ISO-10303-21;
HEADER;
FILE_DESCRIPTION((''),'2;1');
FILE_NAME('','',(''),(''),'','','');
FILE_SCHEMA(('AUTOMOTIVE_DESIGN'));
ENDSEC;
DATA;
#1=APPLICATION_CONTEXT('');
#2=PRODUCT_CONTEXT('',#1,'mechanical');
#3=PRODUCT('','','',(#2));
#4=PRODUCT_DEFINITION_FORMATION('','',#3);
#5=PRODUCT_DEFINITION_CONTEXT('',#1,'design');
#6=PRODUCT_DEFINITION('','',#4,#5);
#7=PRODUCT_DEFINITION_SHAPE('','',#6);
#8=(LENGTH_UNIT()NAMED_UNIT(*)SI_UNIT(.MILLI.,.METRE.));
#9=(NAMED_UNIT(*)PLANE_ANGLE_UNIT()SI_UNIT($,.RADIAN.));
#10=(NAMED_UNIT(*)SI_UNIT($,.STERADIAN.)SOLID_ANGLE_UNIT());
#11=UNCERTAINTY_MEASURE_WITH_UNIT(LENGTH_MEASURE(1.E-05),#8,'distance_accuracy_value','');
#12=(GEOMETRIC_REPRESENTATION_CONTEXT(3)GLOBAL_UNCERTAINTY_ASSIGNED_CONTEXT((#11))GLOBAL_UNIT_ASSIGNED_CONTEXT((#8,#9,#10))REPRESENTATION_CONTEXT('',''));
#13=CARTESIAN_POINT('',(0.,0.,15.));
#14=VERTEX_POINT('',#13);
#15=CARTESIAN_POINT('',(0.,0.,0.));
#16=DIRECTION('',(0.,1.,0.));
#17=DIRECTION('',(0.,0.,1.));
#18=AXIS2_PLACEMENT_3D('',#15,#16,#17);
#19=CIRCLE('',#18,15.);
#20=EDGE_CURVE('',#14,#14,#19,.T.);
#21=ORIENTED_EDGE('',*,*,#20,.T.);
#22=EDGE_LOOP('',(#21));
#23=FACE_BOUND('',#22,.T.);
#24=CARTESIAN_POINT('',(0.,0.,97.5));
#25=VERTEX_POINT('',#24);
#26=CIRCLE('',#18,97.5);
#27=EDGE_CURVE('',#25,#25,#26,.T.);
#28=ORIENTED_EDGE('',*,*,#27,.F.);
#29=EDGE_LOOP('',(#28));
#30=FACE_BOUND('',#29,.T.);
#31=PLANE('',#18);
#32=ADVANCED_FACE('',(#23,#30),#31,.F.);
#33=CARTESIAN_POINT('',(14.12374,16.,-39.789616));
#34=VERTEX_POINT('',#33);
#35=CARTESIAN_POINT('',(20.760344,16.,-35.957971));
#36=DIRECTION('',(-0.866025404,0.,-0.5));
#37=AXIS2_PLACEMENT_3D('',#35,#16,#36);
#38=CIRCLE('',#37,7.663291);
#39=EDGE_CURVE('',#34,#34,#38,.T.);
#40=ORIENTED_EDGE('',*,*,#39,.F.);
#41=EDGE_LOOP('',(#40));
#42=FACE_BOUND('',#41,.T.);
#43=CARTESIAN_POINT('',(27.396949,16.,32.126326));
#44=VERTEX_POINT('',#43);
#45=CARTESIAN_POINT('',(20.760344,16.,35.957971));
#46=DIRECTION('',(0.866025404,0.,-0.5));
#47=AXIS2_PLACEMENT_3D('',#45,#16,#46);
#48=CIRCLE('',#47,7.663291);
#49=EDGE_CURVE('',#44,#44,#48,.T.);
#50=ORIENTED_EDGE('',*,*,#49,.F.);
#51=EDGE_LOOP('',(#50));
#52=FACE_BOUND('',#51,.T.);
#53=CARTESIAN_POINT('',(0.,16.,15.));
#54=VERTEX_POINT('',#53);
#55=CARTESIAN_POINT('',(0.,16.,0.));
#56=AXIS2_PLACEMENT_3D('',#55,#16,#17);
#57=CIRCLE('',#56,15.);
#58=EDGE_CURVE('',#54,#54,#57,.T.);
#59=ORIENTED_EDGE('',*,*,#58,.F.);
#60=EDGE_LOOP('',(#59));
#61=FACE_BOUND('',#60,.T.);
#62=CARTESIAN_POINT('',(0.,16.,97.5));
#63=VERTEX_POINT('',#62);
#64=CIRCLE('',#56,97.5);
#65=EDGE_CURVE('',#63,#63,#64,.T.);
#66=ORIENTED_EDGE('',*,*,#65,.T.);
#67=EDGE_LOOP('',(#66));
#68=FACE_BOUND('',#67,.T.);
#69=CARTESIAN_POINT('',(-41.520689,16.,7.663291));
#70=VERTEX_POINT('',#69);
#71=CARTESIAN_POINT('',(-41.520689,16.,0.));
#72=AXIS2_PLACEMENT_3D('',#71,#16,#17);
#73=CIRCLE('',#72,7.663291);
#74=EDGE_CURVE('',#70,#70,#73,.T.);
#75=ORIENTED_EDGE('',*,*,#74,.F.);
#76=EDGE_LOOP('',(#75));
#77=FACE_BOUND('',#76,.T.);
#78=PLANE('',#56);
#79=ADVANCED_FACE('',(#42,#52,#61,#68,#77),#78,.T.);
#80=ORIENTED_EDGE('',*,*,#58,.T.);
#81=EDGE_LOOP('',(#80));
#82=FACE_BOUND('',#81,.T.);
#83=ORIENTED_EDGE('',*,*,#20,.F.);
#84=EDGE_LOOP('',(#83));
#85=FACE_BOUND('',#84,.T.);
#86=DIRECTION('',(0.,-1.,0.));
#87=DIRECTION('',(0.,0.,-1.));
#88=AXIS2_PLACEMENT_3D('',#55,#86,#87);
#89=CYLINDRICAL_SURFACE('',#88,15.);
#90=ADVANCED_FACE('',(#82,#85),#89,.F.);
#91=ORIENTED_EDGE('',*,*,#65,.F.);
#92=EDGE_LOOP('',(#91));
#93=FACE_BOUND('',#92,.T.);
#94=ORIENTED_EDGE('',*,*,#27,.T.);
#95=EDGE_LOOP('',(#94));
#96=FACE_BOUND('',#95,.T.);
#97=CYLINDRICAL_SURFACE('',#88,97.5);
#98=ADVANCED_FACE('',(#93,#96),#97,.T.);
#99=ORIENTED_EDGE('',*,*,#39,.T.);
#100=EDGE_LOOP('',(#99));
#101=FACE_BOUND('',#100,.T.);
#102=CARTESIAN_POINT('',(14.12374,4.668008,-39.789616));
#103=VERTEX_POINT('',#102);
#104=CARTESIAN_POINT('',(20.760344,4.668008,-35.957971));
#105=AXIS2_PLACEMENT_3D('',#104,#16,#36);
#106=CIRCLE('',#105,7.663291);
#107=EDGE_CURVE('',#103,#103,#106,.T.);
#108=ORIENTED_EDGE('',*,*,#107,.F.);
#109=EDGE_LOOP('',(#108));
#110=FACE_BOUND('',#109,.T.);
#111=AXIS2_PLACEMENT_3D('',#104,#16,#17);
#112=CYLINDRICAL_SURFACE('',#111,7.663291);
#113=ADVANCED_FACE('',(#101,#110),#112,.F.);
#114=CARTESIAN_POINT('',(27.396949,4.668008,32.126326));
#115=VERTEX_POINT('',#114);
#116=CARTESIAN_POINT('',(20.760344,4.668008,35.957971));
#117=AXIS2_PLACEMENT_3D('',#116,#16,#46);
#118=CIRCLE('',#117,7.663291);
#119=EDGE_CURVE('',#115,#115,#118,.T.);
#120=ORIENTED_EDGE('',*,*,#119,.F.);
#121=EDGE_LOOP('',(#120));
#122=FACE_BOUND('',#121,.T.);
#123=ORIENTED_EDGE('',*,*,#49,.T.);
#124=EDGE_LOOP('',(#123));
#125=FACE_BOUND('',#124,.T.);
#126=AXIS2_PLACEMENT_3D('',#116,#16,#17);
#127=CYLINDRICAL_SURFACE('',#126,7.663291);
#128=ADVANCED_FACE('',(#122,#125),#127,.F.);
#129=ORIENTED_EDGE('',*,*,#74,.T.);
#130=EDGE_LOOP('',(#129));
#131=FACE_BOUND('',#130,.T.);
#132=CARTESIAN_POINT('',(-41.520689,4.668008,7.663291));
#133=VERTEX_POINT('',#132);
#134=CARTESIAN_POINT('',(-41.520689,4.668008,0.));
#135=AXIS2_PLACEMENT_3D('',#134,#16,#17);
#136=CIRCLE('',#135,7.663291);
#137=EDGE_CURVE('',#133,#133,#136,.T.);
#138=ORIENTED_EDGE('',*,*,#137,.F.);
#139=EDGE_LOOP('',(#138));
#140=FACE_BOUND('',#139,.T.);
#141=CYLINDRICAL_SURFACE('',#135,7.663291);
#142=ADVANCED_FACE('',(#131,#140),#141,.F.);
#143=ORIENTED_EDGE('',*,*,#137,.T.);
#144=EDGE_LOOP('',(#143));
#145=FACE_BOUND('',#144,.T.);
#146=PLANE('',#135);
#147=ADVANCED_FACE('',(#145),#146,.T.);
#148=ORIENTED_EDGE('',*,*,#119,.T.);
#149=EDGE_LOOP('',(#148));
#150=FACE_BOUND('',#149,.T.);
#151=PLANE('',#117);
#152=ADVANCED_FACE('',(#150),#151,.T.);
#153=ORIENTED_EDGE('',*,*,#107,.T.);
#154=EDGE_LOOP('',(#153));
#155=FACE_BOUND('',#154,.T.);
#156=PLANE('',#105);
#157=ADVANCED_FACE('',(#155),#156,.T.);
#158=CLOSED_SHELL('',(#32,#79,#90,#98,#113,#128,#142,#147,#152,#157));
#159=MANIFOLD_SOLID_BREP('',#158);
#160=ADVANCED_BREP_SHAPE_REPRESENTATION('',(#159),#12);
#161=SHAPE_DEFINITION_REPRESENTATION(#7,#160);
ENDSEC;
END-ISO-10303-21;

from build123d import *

# Parameters (mm, degrees)
SKETCH1_R           = 97.5
BOSS_EXTRUDE1_DEPTH = 16
SKETCH2_R           = 15
CUT_EXTRUDE1_DEPTH  = 139.811022617
SKETCH3_R           = 7.663290613
CUT_EXTRUDE2_DEPTH  = 11.331991897
CIRPATTERN1_COUNT   = 3


with BuildPart() as part:
    # Sketch1 → Boss-Extrude1 (new body)
    with BuildSketch(Plane(origin=(0, 0, 0), x_dir=(1, 0, 0), z_dir=(0, 1, 0))):
        Circle(SKETCH1_R)
    extrude(amount=BOSS_EXTRUDE1_DEPTH)

    # Sketch2 → Cut-Extrude1 (cut, through all)
    with BuildSketch(Plane(origin=(0, 0, 0), x_dir=(1, 0, 0), z_dir=(0, 1, 0))):
        Circle(SKETCH2_R)
    extrude(amount=CUT_EXTRUDE1_DEPTH, mode=Mode.SUBTRACT)

    # Sketch3 → Cut-Extrude2 (cut)
    with BuildSketch(Plane(origin=(0, 16, 0), x_dir=(1, 0, 0), z_dir=(0, 1, 0))):
        with Locations((-41.520688626, 0)):
            Circle(SKETCH3_R)
    cut_extrude2 = extrude(amount=-CUT_EXTRUDE2_DEPTH, mode=Mode.SUBTRACT)

    # CirPattern1: Cut-Extrude2 ×3 about axis
    cirpattern1_axis = Axis((0, 0, 0), (0, 1, 0))
    for i in range(1, CIRPATTERN1_COUNT):
        add(cut_extrude2.rotate(cirpattern1_axis, i * 360 / CIRPATTERN1_COUNT), mode=Mode.SUBTRACT)


solid = part.part
